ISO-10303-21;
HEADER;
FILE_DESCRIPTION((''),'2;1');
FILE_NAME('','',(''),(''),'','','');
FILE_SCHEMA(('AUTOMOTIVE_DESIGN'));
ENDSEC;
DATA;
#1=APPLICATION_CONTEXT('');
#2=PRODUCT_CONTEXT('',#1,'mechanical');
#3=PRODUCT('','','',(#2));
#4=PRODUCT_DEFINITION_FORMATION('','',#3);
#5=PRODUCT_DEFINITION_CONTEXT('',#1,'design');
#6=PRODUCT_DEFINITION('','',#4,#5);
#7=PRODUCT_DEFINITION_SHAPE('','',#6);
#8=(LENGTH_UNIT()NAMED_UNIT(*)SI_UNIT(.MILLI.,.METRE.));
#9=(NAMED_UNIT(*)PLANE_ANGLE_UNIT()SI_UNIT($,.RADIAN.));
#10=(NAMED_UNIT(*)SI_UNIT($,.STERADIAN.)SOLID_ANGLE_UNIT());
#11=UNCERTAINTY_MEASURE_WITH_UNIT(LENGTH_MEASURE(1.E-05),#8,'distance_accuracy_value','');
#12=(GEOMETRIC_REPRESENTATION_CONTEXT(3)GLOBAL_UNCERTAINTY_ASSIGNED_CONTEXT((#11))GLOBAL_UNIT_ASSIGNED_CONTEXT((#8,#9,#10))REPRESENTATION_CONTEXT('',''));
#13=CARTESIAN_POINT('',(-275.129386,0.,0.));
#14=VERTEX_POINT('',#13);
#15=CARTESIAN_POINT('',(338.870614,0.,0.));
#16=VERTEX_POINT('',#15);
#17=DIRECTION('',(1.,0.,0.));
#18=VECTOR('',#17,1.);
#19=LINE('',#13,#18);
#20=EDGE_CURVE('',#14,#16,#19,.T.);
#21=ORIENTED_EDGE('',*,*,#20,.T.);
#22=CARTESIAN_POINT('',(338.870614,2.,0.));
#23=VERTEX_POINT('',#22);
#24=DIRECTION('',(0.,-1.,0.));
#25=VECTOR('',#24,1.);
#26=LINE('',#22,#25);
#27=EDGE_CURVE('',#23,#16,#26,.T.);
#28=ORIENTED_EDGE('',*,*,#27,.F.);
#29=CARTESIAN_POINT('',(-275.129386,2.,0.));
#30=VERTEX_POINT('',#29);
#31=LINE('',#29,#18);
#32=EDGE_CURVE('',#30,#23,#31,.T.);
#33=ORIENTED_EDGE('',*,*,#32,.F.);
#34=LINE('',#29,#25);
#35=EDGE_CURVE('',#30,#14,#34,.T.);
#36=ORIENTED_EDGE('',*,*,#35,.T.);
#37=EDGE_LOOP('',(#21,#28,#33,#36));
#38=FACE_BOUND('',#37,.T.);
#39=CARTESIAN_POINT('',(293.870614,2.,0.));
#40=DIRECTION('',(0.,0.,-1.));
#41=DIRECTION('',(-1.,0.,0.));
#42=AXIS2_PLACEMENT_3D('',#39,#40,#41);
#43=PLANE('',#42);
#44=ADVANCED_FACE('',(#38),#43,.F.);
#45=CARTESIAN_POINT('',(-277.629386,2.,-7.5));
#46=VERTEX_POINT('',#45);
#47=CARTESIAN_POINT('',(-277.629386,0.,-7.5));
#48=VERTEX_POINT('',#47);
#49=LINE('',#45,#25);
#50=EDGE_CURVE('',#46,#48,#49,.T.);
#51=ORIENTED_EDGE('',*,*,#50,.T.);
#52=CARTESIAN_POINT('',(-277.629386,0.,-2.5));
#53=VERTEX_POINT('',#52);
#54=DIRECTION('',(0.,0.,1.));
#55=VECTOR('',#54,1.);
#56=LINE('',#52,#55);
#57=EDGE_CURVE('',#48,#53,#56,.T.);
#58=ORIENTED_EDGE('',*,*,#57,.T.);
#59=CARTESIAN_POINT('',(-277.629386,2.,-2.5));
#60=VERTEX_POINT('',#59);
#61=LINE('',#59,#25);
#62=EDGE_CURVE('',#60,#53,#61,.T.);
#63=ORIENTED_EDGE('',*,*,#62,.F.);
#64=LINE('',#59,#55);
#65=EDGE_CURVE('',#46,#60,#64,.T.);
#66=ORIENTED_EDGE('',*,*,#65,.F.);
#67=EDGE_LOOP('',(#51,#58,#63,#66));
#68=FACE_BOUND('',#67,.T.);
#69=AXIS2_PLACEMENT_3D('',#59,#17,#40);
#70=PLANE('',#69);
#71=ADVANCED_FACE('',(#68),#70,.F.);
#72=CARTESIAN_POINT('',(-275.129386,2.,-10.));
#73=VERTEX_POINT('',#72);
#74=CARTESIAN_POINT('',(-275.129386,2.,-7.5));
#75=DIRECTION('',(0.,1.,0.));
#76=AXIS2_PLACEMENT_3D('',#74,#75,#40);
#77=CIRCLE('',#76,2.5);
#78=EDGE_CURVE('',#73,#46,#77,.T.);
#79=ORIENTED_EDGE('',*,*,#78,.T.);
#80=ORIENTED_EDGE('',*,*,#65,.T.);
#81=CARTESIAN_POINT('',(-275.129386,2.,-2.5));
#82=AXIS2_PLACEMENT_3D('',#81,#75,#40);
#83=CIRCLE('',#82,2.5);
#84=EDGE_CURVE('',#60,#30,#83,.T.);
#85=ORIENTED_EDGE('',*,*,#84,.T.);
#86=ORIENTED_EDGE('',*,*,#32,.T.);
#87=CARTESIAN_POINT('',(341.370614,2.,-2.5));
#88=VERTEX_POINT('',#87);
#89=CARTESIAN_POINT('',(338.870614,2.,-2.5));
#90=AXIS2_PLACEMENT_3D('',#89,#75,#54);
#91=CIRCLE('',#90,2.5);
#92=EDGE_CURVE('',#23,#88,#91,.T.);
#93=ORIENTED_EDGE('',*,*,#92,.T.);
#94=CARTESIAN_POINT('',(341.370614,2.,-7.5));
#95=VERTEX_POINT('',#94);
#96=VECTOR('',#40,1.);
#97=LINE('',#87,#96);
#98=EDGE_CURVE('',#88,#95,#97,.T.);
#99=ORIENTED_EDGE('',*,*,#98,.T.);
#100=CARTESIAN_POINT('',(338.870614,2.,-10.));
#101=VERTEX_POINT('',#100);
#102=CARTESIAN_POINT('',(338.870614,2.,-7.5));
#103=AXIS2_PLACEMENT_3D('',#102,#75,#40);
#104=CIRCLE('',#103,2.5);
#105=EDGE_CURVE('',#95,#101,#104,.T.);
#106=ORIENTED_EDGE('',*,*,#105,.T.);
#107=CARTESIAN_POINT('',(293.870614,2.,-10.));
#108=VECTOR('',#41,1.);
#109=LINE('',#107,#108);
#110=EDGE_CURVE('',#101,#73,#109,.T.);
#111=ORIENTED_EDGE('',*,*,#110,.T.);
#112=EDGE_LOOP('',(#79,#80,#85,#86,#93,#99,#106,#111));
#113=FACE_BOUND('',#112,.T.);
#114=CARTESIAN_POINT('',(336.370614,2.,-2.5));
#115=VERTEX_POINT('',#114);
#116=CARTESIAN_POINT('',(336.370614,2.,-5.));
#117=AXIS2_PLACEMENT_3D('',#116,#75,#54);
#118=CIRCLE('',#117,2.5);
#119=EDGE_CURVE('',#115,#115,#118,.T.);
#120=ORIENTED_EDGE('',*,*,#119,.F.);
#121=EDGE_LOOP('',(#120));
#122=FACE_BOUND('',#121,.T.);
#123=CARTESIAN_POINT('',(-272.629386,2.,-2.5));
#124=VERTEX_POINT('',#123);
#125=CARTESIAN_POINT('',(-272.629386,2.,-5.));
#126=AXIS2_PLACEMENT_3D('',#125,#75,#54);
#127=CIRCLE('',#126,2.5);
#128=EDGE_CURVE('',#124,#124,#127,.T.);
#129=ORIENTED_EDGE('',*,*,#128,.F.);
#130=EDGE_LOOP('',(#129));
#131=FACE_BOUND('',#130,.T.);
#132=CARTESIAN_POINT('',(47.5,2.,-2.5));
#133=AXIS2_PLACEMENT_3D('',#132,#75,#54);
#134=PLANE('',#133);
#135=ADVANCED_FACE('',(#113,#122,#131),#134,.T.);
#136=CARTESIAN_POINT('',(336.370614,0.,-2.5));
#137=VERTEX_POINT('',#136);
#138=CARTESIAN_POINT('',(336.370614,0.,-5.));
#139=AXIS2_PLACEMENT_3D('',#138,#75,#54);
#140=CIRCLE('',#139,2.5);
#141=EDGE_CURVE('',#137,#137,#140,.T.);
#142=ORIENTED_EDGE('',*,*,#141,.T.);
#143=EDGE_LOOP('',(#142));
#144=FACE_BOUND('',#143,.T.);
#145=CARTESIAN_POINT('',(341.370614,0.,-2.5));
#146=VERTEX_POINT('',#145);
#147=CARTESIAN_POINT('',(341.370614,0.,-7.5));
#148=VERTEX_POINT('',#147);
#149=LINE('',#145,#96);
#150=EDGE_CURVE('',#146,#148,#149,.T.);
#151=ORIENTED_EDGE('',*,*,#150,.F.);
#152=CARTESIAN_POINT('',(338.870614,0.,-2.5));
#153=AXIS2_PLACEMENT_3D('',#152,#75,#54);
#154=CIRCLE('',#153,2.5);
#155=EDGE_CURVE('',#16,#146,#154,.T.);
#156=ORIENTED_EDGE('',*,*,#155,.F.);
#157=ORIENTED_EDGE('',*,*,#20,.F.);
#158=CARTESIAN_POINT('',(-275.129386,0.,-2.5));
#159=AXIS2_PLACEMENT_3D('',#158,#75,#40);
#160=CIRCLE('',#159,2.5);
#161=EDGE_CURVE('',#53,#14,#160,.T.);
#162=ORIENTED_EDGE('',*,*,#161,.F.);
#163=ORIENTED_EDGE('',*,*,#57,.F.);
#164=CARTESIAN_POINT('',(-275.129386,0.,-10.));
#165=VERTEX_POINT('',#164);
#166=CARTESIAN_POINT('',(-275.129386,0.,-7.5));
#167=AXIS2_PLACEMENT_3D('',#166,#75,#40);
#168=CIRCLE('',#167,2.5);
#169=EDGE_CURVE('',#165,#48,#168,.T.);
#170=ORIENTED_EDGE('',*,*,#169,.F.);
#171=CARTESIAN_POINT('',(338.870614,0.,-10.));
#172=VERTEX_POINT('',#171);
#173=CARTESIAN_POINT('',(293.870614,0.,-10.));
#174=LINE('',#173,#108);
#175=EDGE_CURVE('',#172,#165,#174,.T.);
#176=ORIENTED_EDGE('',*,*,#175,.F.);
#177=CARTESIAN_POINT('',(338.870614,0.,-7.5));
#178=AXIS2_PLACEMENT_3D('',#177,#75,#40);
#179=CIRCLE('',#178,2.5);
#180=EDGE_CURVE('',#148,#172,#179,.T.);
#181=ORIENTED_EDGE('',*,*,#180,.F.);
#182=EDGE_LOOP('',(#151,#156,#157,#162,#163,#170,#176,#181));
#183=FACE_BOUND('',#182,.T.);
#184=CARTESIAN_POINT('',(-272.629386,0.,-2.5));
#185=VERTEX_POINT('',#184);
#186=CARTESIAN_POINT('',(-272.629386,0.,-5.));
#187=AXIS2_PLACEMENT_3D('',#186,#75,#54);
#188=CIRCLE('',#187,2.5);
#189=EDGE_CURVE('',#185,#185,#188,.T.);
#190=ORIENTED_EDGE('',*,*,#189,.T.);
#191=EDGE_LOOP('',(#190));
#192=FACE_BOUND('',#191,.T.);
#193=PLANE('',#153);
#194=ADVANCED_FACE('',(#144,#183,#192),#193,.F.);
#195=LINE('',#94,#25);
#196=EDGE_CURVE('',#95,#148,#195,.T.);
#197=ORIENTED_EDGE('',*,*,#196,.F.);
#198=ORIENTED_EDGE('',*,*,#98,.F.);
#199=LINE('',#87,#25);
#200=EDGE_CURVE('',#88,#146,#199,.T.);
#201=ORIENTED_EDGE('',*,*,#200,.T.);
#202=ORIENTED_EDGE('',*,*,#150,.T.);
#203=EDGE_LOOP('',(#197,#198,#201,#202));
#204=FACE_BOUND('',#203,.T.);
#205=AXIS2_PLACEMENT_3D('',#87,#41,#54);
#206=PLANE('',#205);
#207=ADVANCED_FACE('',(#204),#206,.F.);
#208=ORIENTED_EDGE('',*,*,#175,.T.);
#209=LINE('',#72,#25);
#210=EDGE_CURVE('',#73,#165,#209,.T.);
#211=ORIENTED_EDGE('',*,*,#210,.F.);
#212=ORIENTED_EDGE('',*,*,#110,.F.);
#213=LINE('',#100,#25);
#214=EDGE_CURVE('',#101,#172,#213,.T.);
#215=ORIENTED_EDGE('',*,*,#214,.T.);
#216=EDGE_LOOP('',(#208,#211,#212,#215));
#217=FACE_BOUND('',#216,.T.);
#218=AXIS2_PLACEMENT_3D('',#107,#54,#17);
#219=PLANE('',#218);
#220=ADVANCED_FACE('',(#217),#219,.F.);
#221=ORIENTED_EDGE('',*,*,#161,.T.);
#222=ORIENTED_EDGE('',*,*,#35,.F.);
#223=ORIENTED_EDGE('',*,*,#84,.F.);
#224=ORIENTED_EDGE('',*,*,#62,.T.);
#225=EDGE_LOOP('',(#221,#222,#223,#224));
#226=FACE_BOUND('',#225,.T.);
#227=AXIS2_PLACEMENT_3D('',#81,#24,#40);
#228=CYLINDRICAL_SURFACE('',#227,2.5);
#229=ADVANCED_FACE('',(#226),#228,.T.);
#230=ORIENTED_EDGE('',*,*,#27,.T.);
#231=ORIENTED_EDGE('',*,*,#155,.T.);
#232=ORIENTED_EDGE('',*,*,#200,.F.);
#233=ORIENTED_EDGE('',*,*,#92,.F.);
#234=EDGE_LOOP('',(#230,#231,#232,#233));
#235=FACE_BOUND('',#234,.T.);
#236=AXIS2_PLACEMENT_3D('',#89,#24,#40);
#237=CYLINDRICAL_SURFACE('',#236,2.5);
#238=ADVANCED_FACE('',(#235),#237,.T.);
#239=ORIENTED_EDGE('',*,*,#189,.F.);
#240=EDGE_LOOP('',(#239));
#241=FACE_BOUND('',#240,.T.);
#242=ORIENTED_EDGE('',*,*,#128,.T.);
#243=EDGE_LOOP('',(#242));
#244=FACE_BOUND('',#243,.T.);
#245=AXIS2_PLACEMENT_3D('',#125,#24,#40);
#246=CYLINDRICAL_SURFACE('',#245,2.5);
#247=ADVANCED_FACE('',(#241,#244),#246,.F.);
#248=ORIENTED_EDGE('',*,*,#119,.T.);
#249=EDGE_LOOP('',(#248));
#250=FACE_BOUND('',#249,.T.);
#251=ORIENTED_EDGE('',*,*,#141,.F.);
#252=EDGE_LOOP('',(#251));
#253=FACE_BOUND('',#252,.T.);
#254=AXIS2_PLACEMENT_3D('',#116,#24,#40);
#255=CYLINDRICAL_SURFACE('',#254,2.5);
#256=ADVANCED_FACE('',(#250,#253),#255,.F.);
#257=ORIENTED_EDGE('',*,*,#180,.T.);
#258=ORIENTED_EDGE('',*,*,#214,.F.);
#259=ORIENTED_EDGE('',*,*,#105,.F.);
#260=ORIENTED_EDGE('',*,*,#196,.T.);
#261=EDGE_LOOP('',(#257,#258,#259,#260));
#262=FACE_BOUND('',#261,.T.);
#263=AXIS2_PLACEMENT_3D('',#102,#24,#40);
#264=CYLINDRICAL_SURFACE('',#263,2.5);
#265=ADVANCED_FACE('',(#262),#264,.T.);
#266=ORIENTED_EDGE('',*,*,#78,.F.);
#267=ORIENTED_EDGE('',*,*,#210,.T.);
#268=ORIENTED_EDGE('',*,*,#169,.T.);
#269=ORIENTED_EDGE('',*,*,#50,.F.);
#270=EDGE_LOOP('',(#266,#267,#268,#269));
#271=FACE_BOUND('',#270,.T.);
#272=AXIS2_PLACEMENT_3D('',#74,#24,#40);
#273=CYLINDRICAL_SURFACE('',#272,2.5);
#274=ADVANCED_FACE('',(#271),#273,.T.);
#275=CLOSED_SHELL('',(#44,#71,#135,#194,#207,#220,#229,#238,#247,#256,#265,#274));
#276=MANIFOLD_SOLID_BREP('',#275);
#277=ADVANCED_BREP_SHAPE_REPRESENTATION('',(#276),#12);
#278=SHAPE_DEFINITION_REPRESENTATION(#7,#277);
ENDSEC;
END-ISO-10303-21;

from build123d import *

# Parameters (mm, degrees)
SKETCH1_R           = 2.5
BOSS_EXTRUDE2_DEPTH = 2
FLEX1_OUTLINE_R     = 2.5
FLEX1_DEPTH         = 2


# Read off the part's stored shape, not the designer's step: Flex1
with BuildPart() as part:
    # Sketch1 → Boss-Extrude2 (new body)
    with BuildSketch(Plane(origin=(0, 0, 0), x_dir=(1, 0, 0), z_dir=(0, 1, 0))):
        with BuildLine():
            Line((2.5, 0), (47.5, 0))
            ThreePointArc((47.5, 0), (49.267766953, 0.732233047), (50, 2.5))
            Line((50, 2.5), (50, 7.5))
            ThreePointArc((50, 7.5), (49.267766953, 9.267766953), (47.5, 10))
            Line((47.5, 10), (2.5, 10))
            ThreePointArc((2.5, 10), (0.732233047, 9.267766953), (0, 7.5))
            Line((0, 7.5), (0, 2.5))
            ThreePointArc((0, 2.5), (0.732233047, 0.732233047), (2.5, 0))
        make_face()
        with Locations(Location((5, 5, 0), (0, 0, 270))):
            Circle(SKETCH1_R, mode=Mode.SUBTRACT)
        with Locations(Location((45, 5, 0), (0, 0, 270))):
            Circle(SKETCH1_R, mode=Mode.SUBTRACT)
    extrude(amount=BOSS_EXTRUDE2_DEPTH)

    # Flex1 outline → Flex1 (add)
    # profile 1 of 4: a face of its own
    with BuildSketch(Plane(origin=(0, 0, 0), x_dir=(1, 0, 0), z_dir=(0, 1, 0))):
        with BuildLine():
            Line((2.5, 10), (-275.129385693, 10))
            ThreePointArc((-275.129385693, 10), (-276.897152646, 9.267766953), (-277.629385693, 7.5))
            Line((-277.629385693, 7.5), (-277.629385693, 2.5))
            ThreePointArc((-277.629385693, 2.5), (-276.897152646, 0.732233047), (-275.129385693, 0))
            Line((-275.129385693, 0), (2.5, 0))
            ThreePointArc((2.5, 0), (0.732233047, 0.732233047), (0, 2.5))
            Line((0, 2.5), (0, 7.5))
            ThreePointArc((0, 7.5), (0.732233047, 9.267766953), (2.5, 10))
        make_face()
        with Locations((-272.629385693, 5)):
            Circle(FLEX1_OUTLINE_R, mode=Mode.SUBTRACT)
    # profile 2 of 4: a face of its own
    with BuildSketch(Plane(origin=(0, 0, 0), x_dir=(1, 0, 0), z_dir=(0, 1, 0))):
        with BuildLine():
            Line((338.870614307, 10), (47.5, 10))
            ThreePointArc((47.5, 10), (49.267766953, 9.267766953), (50, 7.5))
            Line((50, 7.5), (50, 2.5))
            ThreePointArc((50, 2.5), (49.267766953, 0.732233047), (47.5, 0))
            Line((47.5, 0), (338.870614307, 0))
            ThreePointArc((338.870614307, 0), (340.63838126, 0.732233047), (341.370614307, 2.5))
            Line((341.370614307, 2.5), (341.370614307, 7.5))
            ThreePointArc((341.370614307, 7.5), (340.63838126, 9.267766953), (338.870614307, 10))
        make_face()
        with Locations((336.370614307, 5)):
            Circle(FLEX1_OUTLINE_R, mode=Mode.SUBTRACT)
    # profile 3 of 4: a face of its own
    with BuildSketch(Plane(origin=(0, 0, 0), x_dir=(1, 0, 0), z_dir=(0, 1, 0))):
        with Locations((5, 5)):
            Circle(FLEX1_OUTLINE_R)
    # profile 4 of 4: a face of its own
    with BuildSketch(Plane(origin=(0, 0, 0), x_dir=(1, 0, 0), z_dir=(0, 1, 0))):
        with Locations((45, 5)):
            Circle(FLEX1_OUTLINE_R)
    extrude(amount=FLEX1_DEPTH)


solid = part.part
